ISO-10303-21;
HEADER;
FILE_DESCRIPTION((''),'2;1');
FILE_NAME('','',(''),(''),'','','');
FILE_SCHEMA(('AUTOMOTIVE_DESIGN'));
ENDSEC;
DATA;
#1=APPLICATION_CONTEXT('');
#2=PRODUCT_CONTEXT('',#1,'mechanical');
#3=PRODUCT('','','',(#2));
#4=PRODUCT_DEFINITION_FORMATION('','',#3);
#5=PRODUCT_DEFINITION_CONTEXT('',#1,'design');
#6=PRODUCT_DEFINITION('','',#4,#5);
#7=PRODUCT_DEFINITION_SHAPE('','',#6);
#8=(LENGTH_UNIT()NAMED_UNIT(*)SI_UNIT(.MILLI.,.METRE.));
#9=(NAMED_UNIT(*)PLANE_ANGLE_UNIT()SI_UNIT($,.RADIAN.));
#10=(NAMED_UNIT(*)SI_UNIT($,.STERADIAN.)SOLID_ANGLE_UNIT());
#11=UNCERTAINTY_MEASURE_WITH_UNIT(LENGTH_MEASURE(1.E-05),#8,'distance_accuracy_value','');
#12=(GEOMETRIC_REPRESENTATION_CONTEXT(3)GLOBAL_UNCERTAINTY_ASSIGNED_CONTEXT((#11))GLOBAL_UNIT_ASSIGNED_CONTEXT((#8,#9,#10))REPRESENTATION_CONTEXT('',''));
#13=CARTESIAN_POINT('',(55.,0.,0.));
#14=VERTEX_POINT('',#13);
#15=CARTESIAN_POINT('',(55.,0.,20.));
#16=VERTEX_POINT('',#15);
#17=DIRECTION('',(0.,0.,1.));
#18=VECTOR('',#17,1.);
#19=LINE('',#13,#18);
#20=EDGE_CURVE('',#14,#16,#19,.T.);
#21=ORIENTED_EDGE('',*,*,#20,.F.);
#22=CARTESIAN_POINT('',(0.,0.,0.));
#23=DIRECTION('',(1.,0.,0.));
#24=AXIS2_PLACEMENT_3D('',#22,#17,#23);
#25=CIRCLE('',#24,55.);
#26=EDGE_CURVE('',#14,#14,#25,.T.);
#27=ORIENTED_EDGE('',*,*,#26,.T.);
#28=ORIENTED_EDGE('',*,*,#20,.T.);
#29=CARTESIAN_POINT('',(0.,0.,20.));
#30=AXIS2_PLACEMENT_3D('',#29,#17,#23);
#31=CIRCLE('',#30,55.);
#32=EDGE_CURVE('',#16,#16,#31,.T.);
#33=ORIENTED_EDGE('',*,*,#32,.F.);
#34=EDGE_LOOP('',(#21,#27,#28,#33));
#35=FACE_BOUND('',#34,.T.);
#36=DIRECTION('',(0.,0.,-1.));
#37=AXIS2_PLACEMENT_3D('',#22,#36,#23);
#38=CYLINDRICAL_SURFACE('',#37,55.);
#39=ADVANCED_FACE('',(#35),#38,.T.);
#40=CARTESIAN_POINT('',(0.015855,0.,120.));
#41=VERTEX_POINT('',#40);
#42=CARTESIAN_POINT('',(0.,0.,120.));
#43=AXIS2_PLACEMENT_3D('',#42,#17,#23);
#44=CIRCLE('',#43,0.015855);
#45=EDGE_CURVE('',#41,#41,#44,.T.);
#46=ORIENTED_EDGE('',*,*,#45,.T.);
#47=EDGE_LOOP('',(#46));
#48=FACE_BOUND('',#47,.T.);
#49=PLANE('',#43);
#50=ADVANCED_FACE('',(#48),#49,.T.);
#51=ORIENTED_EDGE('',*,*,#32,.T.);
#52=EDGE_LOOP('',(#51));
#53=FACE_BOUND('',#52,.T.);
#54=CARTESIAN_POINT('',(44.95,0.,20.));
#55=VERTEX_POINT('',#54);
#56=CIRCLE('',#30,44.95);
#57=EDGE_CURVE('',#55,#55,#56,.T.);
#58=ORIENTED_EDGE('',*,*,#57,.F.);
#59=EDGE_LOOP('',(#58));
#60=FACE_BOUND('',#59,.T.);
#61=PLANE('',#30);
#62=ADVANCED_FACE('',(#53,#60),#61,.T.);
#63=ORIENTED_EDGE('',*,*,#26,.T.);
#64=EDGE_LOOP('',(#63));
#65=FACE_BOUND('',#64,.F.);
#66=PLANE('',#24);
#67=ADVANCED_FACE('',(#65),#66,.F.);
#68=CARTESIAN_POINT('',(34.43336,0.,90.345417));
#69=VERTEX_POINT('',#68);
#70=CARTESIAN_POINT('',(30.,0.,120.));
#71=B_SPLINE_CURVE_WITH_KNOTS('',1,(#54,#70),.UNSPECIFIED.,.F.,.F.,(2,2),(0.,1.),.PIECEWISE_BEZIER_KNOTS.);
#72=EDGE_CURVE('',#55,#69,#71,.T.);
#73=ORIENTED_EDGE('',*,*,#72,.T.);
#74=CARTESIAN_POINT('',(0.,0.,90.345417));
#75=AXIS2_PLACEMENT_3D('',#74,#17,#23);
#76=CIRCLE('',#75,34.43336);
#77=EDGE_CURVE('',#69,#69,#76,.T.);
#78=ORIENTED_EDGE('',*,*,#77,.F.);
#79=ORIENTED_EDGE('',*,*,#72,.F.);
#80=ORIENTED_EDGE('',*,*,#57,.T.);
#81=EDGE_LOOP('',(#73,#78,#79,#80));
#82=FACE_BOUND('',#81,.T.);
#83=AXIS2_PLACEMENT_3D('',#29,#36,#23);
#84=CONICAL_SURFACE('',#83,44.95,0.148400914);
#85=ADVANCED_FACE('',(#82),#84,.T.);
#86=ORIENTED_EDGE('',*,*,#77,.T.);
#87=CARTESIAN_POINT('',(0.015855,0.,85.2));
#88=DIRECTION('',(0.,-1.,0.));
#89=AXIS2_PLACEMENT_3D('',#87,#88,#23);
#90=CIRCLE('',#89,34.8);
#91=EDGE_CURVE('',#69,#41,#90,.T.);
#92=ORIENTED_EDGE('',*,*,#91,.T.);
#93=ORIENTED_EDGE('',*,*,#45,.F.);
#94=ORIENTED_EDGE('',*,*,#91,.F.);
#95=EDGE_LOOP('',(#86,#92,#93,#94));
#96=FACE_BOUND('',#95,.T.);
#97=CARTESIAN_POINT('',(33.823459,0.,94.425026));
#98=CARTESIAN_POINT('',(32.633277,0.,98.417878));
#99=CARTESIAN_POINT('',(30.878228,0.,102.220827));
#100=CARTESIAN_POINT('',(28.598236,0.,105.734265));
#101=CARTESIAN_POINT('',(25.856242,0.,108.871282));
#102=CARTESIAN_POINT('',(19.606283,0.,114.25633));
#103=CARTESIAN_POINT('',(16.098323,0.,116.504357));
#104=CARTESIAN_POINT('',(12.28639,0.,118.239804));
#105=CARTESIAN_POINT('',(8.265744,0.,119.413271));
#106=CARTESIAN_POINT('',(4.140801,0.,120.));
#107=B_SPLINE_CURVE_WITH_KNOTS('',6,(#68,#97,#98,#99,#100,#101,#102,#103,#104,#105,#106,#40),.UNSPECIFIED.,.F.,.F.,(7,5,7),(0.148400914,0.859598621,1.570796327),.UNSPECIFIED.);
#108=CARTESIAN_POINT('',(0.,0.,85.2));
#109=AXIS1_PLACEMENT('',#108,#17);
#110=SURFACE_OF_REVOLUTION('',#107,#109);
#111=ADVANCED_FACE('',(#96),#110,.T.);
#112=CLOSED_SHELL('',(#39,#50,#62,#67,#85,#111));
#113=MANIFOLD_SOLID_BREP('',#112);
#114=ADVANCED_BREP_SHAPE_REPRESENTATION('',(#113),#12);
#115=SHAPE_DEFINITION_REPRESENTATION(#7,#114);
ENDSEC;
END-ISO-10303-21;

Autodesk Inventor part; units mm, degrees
ref_plane "YZ Plane" through (0, 0, 0) normal (1, 0, 0) x (0, 1, 0)
ref_plane "XZ Plane" through (0, 0, 0) normal (0, 1, 0) x (-1, 0, 0)
sketch "Esboço1" plane through (0, 0, 0) normal (0, 0, 1) x (1, 0, 0)
  circle A0 centre (0, 0) radius 55
  dimension "d0" = 110
extrude "Extrusão1" add sketch "Esboço1" along normal blind 20
sketch "Esboço2" plane through (0, 0, 20) normal (0, 0, 1) x (1, 0, 0)
  circle A0 centre (0, 0) radius 44.95
  dimension "d3" = 89.9
ref_plane "Plano de trabalho2" through (0, 0, 120) normal (0, 0, 1) x (1, 0, 0)
sketch "Esboço3" plane through (0, 0, 120) normal (0, 0, 1) x (1, 0, 0)
  circle A0 centre (0, 0) radius 30
  dimension "d6" = 60
loft "Transição1" add profiles "Esboço2", "Esboço3"
fillet "Arredondamento1" radius 34.8 1 edges at (-30, 0, 120)
properties part number "camera"
